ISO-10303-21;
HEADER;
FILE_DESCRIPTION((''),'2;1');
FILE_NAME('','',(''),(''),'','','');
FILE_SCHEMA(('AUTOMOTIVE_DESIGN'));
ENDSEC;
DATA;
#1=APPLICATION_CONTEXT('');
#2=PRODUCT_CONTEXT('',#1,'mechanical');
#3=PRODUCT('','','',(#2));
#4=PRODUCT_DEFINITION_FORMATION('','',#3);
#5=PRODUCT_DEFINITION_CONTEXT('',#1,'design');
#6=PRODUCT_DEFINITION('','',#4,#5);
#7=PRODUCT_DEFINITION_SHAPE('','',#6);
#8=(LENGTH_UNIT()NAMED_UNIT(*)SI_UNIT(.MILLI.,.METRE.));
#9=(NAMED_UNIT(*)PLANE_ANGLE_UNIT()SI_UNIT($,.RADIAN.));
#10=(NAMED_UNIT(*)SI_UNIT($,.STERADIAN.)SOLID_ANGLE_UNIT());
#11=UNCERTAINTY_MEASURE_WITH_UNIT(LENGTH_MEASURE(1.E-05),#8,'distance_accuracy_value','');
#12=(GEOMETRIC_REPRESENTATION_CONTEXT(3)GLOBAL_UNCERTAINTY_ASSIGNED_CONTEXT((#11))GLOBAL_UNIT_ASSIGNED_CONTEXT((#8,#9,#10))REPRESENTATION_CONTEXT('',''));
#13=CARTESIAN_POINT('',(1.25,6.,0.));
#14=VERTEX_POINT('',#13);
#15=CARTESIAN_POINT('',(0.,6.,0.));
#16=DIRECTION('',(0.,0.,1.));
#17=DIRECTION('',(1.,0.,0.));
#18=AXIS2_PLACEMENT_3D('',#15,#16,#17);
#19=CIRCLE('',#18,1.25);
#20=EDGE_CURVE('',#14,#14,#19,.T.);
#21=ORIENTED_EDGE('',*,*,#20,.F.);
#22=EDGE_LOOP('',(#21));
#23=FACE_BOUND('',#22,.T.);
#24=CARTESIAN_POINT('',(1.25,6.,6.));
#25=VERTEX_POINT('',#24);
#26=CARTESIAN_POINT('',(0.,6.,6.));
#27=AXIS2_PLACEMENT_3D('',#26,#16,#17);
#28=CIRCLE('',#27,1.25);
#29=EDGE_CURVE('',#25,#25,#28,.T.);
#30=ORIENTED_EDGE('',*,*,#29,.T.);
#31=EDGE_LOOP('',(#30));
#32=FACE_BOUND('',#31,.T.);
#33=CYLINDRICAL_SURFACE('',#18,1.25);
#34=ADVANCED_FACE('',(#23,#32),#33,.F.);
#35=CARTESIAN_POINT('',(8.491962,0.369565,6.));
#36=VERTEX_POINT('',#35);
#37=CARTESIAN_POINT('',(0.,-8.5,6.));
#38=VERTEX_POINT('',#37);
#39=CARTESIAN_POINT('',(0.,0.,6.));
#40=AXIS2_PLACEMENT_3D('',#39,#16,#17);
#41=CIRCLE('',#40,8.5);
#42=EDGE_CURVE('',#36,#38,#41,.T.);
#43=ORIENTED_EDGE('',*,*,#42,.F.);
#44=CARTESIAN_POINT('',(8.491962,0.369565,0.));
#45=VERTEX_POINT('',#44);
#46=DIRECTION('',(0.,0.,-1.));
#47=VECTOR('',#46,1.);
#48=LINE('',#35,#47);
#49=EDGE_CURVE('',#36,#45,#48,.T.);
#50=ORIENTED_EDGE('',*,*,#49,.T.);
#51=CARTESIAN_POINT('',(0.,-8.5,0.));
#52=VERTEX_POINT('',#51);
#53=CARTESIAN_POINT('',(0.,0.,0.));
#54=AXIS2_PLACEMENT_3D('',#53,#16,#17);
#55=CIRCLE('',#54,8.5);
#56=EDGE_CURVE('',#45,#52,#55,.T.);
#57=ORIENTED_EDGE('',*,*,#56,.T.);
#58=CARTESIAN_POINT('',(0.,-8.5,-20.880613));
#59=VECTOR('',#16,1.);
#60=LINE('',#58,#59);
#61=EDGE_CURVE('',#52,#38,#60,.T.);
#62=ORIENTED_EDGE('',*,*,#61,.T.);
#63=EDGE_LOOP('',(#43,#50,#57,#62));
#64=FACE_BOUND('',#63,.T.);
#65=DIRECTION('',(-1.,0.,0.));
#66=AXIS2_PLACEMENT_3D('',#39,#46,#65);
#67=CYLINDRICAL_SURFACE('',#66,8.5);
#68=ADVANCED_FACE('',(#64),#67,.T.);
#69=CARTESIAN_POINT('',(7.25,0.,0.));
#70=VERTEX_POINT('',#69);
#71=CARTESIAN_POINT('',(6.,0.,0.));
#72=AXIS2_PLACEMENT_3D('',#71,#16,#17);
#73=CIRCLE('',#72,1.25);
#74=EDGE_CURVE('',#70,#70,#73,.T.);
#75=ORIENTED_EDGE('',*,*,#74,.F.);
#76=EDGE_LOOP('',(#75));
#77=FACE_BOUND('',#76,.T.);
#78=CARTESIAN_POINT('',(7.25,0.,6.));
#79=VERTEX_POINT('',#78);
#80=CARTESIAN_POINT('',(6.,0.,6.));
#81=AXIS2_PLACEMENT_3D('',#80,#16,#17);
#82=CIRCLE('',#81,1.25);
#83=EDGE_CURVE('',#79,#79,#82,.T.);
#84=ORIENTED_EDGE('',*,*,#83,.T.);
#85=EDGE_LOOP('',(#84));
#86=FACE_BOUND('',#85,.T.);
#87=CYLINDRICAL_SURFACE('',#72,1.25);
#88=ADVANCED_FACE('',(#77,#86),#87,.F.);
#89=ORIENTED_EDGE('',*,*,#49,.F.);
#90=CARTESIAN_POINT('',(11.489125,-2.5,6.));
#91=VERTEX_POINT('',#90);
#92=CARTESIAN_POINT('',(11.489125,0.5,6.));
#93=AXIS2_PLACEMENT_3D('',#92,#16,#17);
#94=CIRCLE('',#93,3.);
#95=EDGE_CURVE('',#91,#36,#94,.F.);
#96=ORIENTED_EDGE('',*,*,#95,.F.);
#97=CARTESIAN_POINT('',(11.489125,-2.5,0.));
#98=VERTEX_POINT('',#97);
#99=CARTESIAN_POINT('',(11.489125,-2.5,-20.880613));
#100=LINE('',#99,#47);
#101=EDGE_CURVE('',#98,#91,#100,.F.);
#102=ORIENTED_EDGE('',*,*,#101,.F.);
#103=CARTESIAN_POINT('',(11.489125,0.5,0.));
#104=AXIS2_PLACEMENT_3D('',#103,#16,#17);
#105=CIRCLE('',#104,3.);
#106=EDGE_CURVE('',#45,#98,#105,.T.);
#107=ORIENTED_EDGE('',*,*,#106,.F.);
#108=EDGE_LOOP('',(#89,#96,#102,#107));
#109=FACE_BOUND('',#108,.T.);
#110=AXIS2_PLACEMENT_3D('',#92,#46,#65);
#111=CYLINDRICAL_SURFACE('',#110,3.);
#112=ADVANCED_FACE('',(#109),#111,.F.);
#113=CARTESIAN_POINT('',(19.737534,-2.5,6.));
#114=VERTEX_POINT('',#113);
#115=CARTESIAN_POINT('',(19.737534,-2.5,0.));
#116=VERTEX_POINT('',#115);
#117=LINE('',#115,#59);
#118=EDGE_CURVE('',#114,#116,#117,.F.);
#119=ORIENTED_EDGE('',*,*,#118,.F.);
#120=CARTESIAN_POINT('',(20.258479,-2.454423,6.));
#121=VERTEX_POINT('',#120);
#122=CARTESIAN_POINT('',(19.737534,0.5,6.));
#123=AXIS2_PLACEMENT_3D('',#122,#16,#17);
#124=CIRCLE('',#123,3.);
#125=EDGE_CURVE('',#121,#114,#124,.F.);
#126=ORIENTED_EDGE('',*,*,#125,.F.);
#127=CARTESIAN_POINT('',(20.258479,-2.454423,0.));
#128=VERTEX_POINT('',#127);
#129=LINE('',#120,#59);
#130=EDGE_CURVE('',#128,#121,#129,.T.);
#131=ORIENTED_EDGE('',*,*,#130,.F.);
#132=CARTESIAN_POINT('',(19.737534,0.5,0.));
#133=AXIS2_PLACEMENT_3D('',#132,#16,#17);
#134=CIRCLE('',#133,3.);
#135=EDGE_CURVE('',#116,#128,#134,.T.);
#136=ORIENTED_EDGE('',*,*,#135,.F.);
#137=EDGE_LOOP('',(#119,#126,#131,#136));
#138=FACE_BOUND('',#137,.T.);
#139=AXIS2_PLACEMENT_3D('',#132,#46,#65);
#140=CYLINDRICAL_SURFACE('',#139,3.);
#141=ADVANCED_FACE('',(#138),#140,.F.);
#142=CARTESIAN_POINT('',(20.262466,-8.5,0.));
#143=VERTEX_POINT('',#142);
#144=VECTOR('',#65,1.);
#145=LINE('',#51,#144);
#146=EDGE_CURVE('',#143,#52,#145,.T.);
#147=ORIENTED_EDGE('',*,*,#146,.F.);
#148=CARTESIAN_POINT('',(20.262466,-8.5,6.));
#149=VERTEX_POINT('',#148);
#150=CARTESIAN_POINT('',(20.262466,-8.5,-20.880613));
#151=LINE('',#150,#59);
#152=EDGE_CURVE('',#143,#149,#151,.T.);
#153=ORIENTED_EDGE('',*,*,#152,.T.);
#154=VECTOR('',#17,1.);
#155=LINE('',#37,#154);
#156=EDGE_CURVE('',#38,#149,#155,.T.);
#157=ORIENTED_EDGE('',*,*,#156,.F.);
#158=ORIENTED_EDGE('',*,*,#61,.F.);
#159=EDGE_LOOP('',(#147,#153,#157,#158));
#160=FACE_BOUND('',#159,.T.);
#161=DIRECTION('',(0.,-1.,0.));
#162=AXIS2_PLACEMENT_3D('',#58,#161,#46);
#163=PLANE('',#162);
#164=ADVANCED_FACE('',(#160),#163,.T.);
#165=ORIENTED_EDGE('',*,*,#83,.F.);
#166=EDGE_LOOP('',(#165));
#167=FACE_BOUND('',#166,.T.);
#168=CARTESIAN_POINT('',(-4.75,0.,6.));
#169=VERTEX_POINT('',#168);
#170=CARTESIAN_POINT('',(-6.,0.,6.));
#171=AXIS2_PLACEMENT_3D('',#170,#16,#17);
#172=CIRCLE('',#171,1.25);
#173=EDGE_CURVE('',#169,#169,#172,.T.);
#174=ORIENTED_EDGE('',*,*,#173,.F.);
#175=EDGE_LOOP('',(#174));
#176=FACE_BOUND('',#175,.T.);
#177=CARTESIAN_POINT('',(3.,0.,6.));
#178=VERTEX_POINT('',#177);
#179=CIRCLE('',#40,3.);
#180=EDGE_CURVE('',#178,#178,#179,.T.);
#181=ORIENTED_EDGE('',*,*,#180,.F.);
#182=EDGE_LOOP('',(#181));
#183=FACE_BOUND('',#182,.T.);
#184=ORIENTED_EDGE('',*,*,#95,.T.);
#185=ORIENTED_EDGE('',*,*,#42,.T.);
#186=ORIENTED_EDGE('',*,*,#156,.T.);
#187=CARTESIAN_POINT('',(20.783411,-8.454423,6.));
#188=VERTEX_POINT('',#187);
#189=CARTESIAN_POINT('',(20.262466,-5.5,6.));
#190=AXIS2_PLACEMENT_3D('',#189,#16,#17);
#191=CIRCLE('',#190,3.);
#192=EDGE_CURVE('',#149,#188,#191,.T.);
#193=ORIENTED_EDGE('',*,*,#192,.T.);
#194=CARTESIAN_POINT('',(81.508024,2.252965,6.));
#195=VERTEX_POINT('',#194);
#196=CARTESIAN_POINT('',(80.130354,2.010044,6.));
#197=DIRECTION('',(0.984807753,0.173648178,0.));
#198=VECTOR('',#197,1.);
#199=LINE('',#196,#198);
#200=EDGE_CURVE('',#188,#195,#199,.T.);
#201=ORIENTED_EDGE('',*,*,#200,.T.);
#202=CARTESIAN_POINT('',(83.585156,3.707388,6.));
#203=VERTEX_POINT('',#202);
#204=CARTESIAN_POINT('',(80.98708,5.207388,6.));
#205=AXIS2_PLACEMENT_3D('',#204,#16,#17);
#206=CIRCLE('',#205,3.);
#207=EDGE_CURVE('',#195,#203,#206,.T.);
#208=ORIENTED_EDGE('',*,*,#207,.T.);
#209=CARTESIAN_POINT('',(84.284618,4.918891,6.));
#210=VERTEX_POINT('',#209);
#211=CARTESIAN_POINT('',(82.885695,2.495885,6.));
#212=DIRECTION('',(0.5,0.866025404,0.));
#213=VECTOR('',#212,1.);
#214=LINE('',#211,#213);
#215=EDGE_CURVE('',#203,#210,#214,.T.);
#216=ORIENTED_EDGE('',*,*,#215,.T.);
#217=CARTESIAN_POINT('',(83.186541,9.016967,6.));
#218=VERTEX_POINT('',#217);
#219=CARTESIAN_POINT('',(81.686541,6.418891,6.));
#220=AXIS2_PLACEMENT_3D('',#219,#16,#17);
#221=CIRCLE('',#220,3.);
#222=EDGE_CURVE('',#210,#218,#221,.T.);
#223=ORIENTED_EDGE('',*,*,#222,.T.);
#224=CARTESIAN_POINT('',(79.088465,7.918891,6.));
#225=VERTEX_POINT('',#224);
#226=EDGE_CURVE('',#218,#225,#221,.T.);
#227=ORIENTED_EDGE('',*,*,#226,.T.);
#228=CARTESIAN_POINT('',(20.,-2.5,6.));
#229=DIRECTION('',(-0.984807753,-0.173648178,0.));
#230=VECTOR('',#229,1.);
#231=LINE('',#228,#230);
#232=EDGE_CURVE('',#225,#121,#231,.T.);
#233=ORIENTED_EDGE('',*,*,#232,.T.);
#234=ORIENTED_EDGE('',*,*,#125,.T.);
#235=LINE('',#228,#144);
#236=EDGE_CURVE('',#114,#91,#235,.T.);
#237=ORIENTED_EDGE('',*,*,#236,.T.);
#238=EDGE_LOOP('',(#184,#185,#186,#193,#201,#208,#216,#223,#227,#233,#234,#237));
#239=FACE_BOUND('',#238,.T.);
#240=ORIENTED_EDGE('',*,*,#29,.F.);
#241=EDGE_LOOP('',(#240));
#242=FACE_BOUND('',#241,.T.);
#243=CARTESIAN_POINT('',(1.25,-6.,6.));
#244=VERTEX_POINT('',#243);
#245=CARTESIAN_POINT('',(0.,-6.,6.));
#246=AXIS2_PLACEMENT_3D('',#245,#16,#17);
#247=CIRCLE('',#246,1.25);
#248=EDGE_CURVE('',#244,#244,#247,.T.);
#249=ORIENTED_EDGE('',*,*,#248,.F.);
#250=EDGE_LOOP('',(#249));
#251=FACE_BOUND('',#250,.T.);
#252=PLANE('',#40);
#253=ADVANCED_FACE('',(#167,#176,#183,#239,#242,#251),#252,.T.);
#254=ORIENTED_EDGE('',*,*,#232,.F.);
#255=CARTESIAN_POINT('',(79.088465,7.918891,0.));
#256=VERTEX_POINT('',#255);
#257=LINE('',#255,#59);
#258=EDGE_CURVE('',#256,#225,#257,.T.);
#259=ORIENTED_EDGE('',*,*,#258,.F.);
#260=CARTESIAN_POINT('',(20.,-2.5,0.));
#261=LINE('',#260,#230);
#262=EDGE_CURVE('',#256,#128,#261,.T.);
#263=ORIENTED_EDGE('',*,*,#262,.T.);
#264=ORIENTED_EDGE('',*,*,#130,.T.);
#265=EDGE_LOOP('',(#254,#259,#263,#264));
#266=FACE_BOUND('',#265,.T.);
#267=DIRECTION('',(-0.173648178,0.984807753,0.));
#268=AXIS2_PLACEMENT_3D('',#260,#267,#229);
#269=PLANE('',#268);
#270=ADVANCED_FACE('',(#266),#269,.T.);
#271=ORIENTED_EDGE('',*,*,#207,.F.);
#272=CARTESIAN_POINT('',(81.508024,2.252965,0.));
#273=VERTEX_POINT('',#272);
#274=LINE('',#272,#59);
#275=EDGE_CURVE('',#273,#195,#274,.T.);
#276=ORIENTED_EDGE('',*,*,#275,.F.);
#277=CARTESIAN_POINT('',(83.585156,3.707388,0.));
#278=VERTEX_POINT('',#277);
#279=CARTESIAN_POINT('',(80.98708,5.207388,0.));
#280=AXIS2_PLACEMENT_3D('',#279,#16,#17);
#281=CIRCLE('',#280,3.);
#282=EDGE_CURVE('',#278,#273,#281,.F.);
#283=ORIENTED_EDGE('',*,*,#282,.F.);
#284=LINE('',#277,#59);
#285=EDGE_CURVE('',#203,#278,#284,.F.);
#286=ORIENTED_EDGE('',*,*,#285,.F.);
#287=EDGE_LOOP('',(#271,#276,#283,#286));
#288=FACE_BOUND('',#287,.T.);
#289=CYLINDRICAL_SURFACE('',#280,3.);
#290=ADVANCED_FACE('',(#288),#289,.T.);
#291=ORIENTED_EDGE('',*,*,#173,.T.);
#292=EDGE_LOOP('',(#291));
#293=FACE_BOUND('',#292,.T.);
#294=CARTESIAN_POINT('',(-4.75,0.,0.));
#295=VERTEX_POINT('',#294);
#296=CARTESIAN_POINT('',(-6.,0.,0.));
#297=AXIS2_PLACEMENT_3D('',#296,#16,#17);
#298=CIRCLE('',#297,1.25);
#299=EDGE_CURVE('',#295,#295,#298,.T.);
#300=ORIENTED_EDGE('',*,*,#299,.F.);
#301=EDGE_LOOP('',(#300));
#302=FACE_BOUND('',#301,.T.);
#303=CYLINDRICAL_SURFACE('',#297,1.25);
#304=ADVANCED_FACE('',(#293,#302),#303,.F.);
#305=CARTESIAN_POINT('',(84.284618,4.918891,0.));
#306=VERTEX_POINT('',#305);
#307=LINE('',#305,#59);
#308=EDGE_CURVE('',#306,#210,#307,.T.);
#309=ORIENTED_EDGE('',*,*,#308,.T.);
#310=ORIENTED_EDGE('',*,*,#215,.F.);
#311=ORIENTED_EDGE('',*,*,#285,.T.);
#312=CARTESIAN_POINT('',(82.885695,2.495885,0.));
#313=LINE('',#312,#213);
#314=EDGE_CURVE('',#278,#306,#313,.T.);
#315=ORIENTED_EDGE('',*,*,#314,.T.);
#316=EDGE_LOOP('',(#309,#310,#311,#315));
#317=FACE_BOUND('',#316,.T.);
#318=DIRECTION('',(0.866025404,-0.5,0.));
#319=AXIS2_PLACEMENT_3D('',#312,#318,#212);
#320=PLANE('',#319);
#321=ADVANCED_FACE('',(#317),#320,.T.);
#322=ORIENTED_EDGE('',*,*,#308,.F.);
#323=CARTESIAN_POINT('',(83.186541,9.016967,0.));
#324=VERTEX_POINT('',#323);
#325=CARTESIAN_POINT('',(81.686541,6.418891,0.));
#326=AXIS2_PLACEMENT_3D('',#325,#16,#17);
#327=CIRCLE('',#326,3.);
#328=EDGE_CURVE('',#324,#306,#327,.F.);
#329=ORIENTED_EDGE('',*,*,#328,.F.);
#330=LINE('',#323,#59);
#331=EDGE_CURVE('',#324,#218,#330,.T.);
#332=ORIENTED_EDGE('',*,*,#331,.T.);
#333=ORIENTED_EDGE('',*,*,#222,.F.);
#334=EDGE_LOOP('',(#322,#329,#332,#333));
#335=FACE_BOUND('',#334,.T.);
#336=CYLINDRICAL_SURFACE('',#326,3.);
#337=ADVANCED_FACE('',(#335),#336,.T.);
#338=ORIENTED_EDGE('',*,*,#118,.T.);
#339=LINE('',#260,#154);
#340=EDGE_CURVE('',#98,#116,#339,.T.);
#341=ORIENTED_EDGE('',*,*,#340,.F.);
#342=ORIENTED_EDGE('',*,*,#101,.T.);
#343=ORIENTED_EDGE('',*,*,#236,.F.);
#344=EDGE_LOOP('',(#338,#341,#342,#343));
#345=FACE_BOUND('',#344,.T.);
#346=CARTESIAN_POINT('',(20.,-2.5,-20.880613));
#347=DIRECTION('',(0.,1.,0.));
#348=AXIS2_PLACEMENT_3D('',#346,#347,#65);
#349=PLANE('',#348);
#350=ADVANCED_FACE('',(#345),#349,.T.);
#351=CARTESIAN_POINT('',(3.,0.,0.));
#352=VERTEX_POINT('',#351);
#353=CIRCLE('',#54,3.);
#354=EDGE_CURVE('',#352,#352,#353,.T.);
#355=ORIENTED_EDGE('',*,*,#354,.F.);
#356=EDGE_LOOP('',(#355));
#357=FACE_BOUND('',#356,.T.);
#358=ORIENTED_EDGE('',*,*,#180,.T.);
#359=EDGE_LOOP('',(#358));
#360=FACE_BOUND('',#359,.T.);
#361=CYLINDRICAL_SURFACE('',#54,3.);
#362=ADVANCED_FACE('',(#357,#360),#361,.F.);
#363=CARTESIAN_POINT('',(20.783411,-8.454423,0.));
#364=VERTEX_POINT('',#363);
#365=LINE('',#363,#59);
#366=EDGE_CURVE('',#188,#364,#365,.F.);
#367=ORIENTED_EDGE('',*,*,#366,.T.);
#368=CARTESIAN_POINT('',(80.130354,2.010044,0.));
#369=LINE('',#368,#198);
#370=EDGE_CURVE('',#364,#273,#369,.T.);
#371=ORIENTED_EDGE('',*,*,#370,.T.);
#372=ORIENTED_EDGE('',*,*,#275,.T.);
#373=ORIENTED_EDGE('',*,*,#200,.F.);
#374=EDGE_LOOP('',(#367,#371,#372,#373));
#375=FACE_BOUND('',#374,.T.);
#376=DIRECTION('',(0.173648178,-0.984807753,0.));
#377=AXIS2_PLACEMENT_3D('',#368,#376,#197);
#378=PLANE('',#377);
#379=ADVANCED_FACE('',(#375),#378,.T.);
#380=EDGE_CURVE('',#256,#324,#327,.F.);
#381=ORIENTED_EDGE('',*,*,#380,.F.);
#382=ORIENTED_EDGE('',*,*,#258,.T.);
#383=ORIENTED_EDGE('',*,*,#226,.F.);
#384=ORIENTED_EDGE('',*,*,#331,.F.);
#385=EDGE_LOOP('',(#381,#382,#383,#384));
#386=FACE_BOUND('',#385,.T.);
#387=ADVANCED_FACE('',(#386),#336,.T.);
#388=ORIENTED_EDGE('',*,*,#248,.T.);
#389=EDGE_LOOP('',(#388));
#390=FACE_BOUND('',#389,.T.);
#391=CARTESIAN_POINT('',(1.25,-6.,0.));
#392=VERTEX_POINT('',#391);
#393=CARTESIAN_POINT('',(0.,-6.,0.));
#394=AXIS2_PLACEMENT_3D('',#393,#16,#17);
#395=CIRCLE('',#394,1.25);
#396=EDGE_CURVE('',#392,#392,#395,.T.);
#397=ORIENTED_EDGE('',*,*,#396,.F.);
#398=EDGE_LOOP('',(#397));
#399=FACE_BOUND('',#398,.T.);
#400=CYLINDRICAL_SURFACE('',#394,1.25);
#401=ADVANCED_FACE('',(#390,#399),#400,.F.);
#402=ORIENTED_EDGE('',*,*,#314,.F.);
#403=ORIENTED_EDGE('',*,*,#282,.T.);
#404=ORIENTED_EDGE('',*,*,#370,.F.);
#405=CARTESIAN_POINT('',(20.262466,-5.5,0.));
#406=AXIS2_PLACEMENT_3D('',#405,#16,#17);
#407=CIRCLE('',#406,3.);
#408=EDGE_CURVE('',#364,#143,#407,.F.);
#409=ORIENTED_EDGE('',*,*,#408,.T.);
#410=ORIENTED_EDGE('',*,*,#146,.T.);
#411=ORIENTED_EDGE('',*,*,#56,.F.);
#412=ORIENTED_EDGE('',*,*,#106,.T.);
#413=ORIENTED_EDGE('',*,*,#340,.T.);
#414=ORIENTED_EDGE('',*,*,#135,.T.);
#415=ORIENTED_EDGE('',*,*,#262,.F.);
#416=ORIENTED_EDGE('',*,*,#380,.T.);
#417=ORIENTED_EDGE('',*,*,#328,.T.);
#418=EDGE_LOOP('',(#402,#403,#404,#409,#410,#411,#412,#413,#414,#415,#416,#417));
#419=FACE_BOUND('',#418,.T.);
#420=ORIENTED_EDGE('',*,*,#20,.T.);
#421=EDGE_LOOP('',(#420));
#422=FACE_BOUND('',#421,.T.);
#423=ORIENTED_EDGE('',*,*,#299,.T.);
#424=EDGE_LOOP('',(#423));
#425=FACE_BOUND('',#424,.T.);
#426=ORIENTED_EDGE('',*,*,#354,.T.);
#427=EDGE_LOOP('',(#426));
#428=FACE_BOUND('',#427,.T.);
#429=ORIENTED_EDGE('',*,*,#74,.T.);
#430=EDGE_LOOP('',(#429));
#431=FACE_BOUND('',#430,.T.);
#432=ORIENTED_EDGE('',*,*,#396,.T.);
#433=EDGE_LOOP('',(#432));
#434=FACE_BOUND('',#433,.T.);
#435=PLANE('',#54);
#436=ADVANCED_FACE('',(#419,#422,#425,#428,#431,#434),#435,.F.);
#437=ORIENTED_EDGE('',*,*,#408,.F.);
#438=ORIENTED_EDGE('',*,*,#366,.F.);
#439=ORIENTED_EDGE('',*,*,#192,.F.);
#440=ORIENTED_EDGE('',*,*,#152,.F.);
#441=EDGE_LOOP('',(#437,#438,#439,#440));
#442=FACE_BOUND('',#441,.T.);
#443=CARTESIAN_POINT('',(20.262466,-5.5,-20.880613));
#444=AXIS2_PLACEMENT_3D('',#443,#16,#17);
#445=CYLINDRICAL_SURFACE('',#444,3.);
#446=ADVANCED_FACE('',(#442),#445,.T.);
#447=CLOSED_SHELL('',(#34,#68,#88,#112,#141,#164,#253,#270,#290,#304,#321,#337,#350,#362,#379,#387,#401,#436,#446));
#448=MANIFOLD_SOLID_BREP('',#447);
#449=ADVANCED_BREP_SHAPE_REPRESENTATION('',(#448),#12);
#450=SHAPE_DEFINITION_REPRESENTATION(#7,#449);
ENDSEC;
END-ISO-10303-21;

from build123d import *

# Parameters (mm, degrees)
ESQUISSE1_R                  = 8.5
BOSS_EXTRU_1_DEPTH           = 6
BOSS_EXTRU_2_DEPTH           = 6
BOSS_EXTRU_3_DEPTH           = 6
BOSS_EXTRU_4_DEPTH           = 6
ENL_V_MAT_EXTRU_1_DEPTH      = 87.634907569
ENL_V_MAT_EXTRU_1_DEPTH_BACK = 87.634907569
ESQUISSE4_R                  = 3
ESQUISSE4_R_2                = 1.25
CONG_1_R                     = 3


with BuildPart() as part:
    # Esquisse1 → Boss.-Extru.1 (new body)
    with BuildSketch(Plane.XY):
        Circle(ESQUISSE1_R)
    extrude(amount=BOSS_EXTRU_1_DEPTH)

    # Esquisse2 → Boss.-Extru.2 (add)
    with BuildSketch(Plane.XY.offset(6)):
        Polygon((0, -8.5), (20, -8.5), (20, -2.5), (8.124038405, -2.5), align=None)
    extrude(amount=-BOSS_EXTRU_2_DEPTH)

    # Esquisse3 → Boss.-Extru.3 (add)
    with BuildSketch(Plane.XY.offset(6)):
        Polygon((20, -2.5), (79.088465181, 7.91889066), (80.130354247, 2.010044142), (20.524931981, -8.5), (20, -8.5), align=None)
    extrude(amount=-BOSS_EXTRU_3_DEPTH)

    # Esquisse5 → Boss.-Extru.4 (add)
    with BuildSketch(Plane.XY.offset(6)):
        Polygon((80.130354247, 2.010044142), (82.885694629, 2.495884992), (85.784617603, 7.516966871), (80.588465181, 10.516966871), (79.088465181, 7.91889066), align=None)
    extrude(amount=-BOSS_EXTRU_4_DEPTH)

    # Esquisse4 → Enlèv. mat.-Extru.1 (cut, two sides: drawn at the far end of the back side and taken through both)
    with BuildSketch(Plane.XY.offset(6).offset(-ENL_V_MAT_EXTRU_1_DEPTH_BACK)):
        Circle(ESQUISSE4_R)
        with Locations((-6, 0)):
            Circle(ESQUISSE4_R_2)
        with Locations((0, 6)):
            Circle(ESQUISSE4_R_2)
        with Locations((6, 0)):
            Circle(ESQUISSE4_R_2)
        with Locations((0, -6)):
            Circle(ESQUISSE4_R_2)
    extrude(amount=ENL_V_MAT_EXTRU_1_DEPTH + ENL_V_MAT_EXTRU_1_DEPTH_BACK, mode=Mode.SUBTRACT)

    # Congé1
    cong_1_edges = [part.edges().sort_by_distance(p)[0] for p in [
        (20.524931981, -8.5, 3),
        (82.885694629, 2.495884992, 3),
        (85.784617603, 7.516966871, 3),
        (80.588465181, 10.516966871, 3),
        (20, -2.5, 3),
        (8.124038405, -2.5, 3),
    ]]
    fillet(cong_1_edges, radius=CONG_1_R - 0.0001)  # a hair under: the kernel refuses the full size


solid = part.part
